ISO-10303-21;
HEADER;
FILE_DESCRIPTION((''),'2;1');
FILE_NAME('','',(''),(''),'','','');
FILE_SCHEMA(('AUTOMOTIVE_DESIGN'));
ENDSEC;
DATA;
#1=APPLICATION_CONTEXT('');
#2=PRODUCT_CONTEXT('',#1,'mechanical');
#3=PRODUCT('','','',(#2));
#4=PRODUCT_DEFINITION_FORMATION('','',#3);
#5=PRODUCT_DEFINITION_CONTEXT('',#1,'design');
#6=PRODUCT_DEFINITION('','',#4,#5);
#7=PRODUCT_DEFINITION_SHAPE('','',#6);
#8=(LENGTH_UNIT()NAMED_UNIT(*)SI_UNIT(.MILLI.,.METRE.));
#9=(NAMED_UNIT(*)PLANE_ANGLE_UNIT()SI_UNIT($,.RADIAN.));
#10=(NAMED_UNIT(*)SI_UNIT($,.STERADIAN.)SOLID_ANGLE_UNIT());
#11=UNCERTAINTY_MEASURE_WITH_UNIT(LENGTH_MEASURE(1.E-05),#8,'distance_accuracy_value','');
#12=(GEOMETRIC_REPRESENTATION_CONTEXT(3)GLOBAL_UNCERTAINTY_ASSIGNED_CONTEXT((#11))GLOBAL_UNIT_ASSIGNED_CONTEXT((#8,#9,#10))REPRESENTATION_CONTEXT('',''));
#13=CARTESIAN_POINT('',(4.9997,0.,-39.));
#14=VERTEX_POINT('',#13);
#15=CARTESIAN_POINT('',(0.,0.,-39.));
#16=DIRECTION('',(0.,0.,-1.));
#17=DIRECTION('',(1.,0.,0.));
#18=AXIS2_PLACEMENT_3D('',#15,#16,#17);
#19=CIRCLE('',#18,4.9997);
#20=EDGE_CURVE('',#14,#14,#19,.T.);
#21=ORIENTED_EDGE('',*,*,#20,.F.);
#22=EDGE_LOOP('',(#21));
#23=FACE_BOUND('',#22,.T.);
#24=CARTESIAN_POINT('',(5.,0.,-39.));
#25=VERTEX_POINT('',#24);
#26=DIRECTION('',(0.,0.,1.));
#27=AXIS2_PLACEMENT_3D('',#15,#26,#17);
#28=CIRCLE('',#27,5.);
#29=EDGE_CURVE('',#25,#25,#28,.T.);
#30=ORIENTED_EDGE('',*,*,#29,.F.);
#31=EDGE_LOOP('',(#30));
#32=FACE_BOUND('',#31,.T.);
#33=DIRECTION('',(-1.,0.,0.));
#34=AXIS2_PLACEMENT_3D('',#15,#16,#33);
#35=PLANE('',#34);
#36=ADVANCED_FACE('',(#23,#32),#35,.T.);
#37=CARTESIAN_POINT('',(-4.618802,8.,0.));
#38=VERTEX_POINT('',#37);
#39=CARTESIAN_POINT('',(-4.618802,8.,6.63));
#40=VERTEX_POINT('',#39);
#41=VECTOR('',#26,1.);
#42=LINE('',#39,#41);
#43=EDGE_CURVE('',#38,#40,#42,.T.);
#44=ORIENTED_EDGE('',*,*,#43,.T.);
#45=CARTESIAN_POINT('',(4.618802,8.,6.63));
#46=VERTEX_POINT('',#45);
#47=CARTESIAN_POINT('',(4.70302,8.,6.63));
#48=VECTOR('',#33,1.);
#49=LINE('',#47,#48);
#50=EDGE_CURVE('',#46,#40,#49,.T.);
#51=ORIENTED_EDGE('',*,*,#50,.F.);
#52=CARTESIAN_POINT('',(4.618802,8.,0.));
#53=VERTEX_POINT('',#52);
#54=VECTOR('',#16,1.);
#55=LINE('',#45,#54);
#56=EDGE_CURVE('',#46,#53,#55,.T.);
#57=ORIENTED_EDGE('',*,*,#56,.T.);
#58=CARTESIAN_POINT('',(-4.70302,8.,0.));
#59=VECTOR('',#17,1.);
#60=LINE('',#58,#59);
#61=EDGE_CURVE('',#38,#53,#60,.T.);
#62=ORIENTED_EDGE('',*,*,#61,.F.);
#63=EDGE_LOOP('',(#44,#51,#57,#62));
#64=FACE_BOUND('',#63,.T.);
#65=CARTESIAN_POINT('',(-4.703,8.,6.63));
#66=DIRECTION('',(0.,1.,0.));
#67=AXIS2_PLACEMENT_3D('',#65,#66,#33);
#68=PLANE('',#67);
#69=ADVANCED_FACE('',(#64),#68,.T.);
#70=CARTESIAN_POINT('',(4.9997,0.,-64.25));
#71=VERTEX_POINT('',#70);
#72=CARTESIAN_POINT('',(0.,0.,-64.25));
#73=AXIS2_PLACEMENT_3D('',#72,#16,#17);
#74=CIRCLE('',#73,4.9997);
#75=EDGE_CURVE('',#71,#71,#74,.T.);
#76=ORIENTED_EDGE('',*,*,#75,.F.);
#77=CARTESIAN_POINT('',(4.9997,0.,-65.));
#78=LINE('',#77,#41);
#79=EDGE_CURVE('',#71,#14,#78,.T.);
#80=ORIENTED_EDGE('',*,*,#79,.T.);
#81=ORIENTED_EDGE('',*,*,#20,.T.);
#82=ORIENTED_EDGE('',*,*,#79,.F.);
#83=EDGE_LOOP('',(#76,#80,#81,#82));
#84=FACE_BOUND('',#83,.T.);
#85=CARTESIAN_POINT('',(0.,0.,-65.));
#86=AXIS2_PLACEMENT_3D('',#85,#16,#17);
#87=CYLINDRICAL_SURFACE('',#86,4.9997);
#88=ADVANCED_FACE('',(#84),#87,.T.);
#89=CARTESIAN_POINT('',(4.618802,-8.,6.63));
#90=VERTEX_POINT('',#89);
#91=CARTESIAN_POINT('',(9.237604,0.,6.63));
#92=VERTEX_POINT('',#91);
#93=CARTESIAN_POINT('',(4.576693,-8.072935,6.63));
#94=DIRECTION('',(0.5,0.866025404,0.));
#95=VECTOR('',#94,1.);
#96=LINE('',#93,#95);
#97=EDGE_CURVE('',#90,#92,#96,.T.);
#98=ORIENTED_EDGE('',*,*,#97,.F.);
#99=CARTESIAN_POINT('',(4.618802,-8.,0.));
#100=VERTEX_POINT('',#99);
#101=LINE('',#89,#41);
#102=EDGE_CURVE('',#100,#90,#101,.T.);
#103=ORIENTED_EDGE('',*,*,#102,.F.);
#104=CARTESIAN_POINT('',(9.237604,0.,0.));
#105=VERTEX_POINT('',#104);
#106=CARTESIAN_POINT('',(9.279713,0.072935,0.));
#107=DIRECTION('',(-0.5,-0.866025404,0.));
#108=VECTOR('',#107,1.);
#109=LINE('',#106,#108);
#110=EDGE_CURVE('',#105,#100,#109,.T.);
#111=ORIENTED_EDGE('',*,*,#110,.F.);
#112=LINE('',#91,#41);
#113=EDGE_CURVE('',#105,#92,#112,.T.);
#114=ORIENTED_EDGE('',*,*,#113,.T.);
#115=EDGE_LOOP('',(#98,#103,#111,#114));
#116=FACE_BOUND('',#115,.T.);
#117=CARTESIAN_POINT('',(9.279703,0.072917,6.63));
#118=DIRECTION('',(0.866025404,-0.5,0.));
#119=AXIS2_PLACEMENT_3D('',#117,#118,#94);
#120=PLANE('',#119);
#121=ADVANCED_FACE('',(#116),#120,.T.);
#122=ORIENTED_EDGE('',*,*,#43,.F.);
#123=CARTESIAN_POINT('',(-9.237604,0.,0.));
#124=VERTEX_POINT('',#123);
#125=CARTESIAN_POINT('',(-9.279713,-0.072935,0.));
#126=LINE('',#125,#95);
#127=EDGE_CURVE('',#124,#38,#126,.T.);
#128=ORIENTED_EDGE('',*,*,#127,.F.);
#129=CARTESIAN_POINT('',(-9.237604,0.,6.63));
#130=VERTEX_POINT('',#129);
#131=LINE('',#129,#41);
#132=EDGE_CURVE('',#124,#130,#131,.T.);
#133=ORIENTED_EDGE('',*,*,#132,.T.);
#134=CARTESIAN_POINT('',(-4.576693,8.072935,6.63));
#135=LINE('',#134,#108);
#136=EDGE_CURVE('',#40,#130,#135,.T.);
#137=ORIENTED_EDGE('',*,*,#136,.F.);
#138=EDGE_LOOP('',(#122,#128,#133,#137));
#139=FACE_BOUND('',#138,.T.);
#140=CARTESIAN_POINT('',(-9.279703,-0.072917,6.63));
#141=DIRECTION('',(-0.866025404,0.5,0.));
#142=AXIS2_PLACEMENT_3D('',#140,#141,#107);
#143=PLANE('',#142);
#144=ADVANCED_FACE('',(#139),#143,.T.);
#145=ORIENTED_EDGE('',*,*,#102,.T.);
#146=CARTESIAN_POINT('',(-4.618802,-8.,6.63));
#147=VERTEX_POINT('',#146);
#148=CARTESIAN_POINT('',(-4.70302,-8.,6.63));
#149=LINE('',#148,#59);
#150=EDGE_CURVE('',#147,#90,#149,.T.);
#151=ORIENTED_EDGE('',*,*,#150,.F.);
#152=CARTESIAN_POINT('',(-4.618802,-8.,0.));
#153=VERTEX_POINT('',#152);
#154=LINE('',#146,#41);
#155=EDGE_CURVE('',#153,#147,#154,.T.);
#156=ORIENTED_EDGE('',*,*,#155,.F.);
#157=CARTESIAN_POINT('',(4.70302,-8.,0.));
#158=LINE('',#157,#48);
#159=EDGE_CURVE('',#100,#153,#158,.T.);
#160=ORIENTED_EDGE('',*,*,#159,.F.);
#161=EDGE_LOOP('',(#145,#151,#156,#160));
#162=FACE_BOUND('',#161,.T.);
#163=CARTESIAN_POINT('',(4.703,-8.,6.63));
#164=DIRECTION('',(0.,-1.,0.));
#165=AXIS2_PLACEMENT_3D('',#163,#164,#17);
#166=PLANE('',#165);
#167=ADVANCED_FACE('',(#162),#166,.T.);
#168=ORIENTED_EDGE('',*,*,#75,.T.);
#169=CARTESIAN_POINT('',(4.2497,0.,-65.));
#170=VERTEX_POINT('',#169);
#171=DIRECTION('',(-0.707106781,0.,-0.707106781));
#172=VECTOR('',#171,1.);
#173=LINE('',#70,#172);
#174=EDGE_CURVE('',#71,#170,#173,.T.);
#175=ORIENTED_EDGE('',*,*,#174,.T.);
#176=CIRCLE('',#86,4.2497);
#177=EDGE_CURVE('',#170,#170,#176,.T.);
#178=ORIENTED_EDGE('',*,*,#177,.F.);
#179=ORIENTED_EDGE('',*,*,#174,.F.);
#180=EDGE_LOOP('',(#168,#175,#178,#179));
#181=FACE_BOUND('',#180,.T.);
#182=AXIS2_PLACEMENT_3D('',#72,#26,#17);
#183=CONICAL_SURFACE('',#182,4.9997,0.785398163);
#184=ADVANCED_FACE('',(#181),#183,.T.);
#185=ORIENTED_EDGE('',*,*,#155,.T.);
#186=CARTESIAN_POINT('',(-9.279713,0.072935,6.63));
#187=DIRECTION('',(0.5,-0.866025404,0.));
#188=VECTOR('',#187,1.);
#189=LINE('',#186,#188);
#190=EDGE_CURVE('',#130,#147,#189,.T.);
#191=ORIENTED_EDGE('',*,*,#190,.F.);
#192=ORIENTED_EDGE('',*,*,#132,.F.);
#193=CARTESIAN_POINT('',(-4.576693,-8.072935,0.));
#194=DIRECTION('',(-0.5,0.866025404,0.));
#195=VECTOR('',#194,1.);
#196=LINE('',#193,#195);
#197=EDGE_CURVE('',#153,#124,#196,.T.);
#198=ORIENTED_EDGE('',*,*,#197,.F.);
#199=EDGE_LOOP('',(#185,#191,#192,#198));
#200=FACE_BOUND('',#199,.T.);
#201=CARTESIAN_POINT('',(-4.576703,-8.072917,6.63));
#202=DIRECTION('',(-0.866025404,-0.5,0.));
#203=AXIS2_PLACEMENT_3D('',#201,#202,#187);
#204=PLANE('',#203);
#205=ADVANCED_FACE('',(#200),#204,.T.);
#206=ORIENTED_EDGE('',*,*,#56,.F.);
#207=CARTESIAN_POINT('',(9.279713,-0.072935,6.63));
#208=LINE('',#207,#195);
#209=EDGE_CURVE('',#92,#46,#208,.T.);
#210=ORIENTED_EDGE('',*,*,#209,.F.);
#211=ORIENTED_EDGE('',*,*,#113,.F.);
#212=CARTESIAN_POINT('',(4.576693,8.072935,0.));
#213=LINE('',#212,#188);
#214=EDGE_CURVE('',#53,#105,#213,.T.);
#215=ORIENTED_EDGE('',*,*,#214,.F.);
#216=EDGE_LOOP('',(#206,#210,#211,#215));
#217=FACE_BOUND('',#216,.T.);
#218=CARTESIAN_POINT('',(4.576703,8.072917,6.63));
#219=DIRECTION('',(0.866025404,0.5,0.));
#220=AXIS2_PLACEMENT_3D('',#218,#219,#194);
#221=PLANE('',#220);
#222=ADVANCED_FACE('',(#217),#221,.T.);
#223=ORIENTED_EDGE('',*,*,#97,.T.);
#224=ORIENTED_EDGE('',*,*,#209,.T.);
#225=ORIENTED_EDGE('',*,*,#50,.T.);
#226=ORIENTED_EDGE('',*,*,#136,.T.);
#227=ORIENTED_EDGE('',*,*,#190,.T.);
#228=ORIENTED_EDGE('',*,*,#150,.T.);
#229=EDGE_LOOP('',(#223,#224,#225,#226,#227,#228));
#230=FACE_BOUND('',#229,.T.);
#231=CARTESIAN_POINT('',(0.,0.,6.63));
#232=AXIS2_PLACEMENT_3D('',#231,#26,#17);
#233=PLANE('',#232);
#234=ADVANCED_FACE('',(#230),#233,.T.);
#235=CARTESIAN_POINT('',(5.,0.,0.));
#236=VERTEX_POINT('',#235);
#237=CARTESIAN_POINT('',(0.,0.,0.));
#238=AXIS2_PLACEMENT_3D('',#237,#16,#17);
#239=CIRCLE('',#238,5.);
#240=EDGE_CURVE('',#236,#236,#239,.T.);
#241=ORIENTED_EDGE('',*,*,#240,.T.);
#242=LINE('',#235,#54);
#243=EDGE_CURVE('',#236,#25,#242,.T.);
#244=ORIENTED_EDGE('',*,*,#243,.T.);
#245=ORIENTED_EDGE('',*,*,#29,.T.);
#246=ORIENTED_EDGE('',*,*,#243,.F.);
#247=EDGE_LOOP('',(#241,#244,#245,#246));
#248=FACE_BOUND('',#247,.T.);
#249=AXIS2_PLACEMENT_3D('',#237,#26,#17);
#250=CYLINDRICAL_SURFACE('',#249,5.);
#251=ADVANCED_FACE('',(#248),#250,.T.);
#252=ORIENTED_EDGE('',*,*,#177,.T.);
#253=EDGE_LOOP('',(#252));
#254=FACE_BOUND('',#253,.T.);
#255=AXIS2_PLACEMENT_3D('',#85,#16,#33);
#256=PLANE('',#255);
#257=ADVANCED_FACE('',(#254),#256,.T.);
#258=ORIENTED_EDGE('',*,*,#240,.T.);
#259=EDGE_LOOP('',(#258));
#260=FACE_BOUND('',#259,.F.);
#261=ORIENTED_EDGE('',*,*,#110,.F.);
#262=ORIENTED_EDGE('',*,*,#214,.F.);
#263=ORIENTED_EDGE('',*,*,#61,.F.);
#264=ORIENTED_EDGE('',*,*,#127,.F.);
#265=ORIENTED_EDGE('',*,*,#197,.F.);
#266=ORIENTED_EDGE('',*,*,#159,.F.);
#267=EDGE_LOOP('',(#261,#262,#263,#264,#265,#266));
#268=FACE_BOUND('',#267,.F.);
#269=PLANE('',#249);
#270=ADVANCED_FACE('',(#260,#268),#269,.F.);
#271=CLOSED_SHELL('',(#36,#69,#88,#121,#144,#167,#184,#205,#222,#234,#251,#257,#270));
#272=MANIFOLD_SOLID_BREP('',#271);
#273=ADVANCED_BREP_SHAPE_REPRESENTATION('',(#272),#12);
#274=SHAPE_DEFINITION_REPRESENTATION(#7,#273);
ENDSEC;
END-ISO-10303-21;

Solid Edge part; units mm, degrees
sketch "Sketch1" plane through (0, 0, 0) normal (0, 0, 1) x (1, 0, 0)
  circle A0 centre (0, 0) radius 9.28
  dimension "D1" = 18.56
extrude "Protrusion1" add sketch "Sketch1" along normal blind 6.63
sketch "Sketch2" plane through (0, 0, 0) normal (0, 0, -1) x (1, 0, 0)
  circle A0 centre (0, 0) radius 5
extrude "Protrusion2" add sketch "Sketch2" along normal blind 65
sketch "Sketch3" plane through (0, 0, -65) normal (0, 0, -1) x (1, 0, 0)
  circle A0 centre (0, 0) radius 4.9997
extrude "Cutout1" cut sketch "Sketch3" against normal blind 26 flip side to cut
chamfer "Chamfer_1" distance 0.75 angle 45 1 edges at (-4.9997, 0, -65)
sketch "Sketch4" plane through (0, 0, 6.63) normal (0, 0, 1) x (1, 0, 0)
  line L0 (-4.703, 8) -> (4.703, 8)
  dimension "D1" = 16
extrude "Cutout2" cut sketch "Sketch4" against normal up to next material side at (0, 8.05, 6.63)
pattern_circular "Pattern1" count 6 over 360 about axis through (0, 0, 6.63) along (0, 0, 1) of "Cutout2"
properties part number "24104719"
